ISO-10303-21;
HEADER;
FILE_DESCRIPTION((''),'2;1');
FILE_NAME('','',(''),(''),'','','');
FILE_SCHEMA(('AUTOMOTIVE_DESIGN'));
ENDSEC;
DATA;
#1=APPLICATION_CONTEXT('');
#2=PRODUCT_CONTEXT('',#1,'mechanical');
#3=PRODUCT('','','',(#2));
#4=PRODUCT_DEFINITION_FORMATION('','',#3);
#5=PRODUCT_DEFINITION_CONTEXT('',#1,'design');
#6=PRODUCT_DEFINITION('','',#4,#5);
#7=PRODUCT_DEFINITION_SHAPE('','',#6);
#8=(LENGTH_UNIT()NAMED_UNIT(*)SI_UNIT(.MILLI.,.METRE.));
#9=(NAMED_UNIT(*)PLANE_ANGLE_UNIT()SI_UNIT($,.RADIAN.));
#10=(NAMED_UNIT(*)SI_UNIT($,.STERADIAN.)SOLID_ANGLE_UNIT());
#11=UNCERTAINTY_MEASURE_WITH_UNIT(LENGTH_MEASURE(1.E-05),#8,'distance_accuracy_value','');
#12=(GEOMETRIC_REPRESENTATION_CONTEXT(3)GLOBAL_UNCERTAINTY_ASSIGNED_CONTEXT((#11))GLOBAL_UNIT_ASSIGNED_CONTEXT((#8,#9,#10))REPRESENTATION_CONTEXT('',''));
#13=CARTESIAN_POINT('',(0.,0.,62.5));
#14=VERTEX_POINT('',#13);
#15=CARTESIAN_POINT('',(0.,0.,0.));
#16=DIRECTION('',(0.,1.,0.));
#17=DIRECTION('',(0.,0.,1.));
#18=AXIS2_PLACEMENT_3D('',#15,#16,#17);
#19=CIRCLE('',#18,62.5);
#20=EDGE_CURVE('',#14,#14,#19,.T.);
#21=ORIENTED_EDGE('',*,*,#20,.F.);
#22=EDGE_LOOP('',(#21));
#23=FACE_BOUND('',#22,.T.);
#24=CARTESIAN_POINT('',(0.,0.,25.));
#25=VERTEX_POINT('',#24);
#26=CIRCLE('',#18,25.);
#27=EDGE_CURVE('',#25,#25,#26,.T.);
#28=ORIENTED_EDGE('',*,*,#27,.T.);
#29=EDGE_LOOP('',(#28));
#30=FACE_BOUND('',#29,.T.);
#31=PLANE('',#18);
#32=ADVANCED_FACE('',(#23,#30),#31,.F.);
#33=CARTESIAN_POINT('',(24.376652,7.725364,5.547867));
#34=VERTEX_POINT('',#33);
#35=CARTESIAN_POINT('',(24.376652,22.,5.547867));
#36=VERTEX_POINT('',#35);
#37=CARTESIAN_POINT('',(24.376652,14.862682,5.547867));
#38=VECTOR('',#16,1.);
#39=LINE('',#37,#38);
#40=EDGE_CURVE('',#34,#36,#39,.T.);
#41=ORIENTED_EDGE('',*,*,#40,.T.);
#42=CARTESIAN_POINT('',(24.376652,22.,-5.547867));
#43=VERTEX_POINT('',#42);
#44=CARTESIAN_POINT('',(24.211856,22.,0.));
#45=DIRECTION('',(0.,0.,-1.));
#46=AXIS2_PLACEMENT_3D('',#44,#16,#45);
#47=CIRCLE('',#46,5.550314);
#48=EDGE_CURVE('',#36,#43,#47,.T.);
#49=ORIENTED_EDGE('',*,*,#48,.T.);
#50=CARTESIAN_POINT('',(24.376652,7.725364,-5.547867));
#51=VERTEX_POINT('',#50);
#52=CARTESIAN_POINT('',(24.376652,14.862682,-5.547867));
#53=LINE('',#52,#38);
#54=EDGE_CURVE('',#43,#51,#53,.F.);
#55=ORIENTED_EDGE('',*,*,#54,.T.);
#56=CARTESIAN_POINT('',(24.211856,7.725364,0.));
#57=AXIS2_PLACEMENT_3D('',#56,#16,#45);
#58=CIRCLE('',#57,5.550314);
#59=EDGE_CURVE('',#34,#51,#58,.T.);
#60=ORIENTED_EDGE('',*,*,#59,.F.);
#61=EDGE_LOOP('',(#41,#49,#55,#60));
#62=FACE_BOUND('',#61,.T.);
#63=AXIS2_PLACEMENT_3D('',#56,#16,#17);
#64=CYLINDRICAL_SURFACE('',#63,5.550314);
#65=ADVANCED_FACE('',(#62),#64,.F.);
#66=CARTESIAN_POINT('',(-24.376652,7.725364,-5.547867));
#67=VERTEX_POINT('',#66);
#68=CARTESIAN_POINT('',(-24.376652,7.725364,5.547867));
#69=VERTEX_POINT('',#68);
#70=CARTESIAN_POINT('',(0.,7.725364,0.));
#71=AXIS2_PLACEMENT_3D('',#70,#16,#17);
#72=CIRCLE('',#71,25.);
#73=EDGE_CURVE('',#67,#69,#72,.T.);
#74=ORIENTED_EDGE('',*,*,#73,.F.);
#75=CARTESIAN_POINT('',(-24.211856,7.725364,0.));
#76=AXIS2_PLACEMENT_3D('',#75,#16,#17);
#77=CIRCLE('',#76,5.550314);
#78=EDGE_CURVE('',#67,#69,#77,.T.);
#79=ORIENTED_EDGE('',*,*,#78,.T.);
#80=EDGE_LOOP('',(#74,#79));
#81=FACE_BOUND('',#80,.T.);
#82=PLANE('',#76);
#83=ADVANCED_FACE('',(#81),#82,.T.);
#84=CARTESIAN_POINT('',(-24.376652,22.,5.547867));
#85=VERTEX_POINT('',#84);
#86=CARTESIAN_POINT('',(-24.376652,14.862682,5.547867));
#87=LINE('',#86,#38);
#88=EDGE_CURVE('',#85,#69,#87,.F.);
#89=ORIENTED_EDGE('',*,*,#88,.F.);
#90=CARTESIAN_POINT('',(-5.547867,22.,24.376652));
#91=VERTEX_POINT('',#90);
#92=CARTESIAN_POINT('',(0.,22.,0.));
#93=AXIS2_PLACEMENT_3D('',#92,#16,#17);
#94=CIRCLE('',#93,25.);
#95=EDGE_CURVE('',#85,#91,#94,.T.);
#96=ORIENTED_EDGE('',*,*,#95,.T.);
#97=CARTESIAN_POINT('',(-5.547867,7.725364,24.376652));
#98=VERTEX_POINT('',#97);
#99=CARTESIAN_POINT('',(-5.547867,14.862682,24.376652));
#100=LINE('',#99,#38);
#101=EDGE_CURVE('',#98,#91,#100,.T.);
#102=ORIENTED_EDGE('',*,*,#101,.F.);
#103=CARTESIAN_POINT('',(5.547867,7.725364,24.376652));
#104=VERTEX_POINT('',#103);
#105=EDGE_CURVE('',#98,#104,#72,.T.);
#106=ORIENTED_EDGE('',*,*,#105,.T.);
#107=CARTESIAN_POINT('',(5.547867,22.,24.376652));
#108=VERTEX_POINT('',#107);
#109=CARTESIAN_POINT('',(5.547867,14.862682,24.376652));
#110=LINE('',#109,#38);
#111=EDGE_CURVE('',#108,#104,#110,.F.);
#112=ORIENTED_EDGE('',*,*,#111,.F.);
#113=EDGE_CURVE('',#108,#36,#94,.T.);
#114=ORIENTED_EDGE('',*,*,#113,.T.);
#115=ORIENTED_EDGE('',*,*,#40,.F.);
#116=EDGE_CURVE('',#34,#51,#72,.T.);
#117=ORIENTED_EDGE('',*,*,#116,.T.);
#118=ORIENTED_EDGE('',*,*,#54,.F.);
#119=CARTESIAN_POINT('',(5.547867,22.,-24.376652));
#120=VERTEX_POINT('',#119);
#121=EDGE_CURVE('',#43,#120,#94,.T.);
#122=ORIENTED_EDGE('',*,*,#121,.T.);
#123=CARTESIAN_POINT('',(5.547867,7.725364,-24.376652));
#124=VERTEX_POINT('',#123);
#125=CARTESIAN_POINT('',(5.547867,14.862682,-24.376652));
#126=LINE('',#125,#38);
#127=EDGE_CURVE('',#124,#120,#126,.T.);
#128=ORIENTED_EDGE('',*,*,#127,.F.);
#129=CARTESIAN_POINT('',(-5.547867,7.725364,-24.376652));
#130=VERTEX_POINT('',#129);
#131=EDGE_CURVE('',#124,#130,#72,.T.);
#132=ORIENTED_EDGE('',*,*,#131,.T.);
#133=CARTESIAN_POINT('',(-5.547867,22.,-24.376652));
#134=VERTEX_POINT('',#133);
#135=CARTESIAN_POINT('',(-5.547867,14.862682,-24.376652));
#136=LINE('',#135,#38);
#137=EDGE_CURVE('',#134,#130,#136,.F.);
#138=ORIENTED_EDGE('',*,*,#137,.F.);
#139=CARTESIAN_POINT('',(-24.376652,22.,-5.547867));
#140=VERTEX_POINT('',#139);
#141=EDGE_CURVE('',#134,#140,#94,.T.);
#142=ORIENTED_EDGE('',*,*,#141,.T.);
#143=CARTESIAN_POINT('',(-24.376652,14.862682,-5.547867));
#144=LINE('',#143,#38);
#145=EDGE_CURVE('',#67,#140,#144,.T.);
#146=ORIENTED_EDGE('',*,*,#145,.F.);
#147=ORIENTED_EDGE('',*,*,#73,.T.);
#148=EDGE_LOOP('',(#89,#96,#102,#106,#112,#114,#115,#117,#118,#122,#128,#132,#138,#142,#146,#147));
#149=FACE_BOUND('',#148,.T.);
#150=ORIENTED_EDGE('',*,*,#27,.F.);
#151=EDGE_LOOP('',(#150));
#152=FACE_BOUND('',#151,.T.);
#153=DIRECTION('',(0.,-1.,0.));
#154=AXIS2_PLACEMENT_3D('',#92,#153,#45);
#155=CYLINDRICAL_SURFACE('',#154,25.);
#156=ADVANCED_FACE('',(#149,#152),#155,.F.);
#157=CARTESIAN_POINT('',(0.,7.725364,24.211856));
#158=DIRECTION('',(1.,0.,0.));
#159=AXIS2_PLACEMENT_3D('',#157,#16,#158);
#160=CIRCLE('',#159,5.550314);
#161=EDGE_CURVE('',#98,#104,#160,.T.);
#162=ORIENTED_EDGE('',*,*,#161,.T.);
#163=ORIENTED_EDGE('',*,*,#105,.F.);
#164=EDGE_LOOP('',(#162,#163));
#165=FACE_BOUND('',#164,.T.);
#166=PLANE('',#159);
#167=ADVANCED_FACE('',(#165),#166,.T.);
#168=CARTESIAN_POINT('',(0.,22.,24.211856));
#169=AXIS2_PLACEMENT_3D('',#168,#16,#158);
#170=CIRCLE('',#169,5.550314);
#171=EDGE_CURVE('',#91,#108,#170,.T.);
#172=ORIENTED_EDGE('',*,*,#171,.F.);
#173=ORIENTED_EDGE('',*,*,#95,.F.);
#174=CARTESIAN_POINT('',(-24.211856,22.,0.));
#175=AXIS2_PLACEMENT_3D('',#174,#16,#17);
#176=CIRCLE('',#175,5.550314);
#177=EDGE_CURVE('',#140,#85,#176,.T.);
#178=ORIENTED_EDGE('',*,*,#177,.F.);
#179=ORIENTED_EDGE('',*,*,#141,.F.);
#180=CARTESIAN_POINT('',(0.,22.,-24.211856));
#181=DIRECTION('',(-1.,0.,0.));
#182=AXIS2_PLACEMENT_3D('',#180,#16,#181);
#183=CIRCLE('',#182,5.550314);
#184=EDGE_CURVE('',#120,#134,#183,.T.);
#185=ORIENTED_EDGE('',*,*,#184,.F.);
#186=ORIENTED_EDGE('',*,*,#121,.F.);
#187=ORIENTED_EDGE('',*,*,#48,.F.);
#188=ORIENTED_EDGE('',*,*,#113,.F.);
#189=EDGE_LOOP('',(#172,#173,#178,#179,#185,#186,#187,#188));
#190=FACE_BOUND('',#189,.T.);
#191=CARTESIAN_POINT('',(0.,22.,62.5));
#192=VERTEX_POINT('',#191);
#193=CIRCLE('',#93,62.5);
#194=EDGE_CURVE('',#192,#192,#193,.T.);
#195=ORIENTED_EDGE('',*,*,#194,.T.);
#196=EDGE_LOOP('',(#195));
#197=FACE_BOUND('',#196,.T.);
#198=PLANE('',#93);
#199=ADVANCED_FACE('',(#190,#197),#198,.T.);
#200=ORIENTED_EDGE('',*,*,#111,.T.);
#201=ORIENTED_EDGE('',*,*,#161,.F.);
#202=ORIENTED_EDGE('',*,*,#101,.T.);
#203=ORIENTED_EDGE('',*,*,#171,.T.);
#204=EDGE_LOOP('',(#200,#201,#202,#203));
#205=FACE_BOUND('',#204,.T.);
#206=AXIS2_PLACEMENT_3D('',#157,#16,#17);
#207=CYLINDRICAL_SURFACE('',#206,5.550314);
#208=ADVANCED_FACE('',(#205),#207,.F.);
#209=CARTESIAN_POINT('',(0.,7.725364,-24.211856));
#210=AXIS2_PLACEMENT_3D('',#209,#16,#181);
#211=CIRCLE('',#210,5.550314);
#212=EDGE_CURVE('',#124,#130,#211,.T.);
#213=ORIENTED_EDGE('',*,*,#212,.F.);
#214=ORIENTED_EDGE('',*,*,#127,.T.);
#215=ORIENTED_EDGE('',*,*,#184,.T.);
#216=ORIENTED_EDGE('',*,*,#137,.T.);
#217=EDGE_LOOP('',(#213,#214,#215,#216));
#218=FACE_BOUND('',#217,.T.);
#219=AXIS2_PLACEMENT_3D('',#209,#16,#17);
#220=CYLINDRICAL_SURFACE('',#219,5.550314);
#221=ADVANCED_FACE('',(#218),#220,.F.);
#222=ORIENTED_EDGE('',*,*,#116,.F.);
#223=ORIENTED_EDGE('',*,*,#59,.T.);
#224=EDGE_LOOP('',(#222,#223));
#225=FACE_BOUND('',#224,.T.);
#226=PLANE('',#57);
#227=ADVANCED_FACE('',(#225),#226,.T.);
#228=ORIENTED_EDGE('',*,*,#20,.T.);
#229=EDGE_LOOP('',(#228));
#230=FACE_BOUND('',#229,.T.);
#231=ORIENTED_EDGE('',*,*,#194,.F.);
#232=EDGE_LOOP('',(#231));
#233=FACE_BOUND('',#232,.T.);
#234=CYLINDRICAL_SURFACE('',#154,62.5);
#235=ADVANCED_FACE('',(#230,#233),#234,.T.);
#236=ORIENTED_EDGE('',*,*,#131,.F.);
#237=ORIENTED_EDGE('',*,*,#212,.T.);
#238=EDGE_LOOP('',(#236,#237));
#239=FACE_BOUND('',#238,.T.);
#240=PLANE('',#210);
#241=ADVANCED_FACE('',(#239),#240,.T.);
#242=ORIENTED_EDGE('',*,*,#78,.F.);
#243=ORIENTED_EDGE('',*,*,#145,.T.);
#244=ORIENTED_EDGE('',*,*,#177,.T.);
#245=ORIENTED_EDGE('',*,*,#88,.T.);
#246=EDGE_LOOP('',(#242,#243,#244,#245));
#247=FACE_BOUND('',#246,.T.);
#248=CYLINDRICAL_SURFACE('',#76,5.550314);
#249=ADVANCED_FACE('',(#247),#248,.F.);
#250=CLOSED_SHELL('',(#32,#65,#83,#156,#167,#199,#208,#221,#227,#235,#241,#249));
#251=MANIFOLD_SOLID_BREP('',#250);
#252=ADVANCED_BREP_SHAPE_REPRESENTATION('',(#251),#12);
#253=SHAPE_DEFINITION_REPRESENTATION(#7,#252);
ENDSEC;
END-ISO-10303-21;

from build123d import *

# Parameters (mm, degrees)
SKETCH1_R           = 62.5
BOSS_EXTRUDE1_DEPTH = 22
SKETCH2_R           = 25
CUT_EXTRUDE1_DEPTH  = 92.08512502
SKETCH3_R           = 5.550313727
CUT_EXTRUDE2_DEPTH  = 14.274636139
CIRPATTERN1_COUNT   = 4


with BuildPart() as part:
    # Sketch1 → Boss-Extrude1 (new body)
    with BuildSketch(Plane(origin=(0, 0, 0), x_dir=(1, 0, 0), z_dir=(0, 1, 0))):
        Circle(SKETCH1_R)
    extrude(amount=BOSS_EXTRUDE1_DEPTH)

    # Sketch2 → Cut-Extrude1 (cut, through all)
    with BuildSketch(Plane(origin=(0, 0, 0), x_dir=(1, 0, 0), z_dir=(0, 1, 0))):
        Circle(SKETCH2_R)
    extrude(amount=CUT_EXTRUDE1_DEPTH, mode=Mode.SUBTRACT)

    # Sketch3 → Cut-Extrude2 (cut)
    with BuildSketch(Plane(origin=(0, 22, 0), x_dir=(1, 0, 0), z_dir=(0, 1, 0))):
        with Locations((-24.211855671, 0)):
            Circle(SKETCH3_R)
    cut_extrude2 = extrude(amount=-CUT_EXTRUDE2_DEPTH, mode=Mode.SUBTRACT)

    # CirPattern1: Cut-Extrude2 ×4 about axis
    cirpattern1_axis = Axis((0, 0, 0), (0, 1, 0))
    for i in range(1, CIRPATTERN1_COUNT):
        add(cut_extrude2.rotate(cirpattern1_axis, i * 360 / CIRPATTERN1_COUNT), mode=Mode.SUBTRACT)


solid = part.part
